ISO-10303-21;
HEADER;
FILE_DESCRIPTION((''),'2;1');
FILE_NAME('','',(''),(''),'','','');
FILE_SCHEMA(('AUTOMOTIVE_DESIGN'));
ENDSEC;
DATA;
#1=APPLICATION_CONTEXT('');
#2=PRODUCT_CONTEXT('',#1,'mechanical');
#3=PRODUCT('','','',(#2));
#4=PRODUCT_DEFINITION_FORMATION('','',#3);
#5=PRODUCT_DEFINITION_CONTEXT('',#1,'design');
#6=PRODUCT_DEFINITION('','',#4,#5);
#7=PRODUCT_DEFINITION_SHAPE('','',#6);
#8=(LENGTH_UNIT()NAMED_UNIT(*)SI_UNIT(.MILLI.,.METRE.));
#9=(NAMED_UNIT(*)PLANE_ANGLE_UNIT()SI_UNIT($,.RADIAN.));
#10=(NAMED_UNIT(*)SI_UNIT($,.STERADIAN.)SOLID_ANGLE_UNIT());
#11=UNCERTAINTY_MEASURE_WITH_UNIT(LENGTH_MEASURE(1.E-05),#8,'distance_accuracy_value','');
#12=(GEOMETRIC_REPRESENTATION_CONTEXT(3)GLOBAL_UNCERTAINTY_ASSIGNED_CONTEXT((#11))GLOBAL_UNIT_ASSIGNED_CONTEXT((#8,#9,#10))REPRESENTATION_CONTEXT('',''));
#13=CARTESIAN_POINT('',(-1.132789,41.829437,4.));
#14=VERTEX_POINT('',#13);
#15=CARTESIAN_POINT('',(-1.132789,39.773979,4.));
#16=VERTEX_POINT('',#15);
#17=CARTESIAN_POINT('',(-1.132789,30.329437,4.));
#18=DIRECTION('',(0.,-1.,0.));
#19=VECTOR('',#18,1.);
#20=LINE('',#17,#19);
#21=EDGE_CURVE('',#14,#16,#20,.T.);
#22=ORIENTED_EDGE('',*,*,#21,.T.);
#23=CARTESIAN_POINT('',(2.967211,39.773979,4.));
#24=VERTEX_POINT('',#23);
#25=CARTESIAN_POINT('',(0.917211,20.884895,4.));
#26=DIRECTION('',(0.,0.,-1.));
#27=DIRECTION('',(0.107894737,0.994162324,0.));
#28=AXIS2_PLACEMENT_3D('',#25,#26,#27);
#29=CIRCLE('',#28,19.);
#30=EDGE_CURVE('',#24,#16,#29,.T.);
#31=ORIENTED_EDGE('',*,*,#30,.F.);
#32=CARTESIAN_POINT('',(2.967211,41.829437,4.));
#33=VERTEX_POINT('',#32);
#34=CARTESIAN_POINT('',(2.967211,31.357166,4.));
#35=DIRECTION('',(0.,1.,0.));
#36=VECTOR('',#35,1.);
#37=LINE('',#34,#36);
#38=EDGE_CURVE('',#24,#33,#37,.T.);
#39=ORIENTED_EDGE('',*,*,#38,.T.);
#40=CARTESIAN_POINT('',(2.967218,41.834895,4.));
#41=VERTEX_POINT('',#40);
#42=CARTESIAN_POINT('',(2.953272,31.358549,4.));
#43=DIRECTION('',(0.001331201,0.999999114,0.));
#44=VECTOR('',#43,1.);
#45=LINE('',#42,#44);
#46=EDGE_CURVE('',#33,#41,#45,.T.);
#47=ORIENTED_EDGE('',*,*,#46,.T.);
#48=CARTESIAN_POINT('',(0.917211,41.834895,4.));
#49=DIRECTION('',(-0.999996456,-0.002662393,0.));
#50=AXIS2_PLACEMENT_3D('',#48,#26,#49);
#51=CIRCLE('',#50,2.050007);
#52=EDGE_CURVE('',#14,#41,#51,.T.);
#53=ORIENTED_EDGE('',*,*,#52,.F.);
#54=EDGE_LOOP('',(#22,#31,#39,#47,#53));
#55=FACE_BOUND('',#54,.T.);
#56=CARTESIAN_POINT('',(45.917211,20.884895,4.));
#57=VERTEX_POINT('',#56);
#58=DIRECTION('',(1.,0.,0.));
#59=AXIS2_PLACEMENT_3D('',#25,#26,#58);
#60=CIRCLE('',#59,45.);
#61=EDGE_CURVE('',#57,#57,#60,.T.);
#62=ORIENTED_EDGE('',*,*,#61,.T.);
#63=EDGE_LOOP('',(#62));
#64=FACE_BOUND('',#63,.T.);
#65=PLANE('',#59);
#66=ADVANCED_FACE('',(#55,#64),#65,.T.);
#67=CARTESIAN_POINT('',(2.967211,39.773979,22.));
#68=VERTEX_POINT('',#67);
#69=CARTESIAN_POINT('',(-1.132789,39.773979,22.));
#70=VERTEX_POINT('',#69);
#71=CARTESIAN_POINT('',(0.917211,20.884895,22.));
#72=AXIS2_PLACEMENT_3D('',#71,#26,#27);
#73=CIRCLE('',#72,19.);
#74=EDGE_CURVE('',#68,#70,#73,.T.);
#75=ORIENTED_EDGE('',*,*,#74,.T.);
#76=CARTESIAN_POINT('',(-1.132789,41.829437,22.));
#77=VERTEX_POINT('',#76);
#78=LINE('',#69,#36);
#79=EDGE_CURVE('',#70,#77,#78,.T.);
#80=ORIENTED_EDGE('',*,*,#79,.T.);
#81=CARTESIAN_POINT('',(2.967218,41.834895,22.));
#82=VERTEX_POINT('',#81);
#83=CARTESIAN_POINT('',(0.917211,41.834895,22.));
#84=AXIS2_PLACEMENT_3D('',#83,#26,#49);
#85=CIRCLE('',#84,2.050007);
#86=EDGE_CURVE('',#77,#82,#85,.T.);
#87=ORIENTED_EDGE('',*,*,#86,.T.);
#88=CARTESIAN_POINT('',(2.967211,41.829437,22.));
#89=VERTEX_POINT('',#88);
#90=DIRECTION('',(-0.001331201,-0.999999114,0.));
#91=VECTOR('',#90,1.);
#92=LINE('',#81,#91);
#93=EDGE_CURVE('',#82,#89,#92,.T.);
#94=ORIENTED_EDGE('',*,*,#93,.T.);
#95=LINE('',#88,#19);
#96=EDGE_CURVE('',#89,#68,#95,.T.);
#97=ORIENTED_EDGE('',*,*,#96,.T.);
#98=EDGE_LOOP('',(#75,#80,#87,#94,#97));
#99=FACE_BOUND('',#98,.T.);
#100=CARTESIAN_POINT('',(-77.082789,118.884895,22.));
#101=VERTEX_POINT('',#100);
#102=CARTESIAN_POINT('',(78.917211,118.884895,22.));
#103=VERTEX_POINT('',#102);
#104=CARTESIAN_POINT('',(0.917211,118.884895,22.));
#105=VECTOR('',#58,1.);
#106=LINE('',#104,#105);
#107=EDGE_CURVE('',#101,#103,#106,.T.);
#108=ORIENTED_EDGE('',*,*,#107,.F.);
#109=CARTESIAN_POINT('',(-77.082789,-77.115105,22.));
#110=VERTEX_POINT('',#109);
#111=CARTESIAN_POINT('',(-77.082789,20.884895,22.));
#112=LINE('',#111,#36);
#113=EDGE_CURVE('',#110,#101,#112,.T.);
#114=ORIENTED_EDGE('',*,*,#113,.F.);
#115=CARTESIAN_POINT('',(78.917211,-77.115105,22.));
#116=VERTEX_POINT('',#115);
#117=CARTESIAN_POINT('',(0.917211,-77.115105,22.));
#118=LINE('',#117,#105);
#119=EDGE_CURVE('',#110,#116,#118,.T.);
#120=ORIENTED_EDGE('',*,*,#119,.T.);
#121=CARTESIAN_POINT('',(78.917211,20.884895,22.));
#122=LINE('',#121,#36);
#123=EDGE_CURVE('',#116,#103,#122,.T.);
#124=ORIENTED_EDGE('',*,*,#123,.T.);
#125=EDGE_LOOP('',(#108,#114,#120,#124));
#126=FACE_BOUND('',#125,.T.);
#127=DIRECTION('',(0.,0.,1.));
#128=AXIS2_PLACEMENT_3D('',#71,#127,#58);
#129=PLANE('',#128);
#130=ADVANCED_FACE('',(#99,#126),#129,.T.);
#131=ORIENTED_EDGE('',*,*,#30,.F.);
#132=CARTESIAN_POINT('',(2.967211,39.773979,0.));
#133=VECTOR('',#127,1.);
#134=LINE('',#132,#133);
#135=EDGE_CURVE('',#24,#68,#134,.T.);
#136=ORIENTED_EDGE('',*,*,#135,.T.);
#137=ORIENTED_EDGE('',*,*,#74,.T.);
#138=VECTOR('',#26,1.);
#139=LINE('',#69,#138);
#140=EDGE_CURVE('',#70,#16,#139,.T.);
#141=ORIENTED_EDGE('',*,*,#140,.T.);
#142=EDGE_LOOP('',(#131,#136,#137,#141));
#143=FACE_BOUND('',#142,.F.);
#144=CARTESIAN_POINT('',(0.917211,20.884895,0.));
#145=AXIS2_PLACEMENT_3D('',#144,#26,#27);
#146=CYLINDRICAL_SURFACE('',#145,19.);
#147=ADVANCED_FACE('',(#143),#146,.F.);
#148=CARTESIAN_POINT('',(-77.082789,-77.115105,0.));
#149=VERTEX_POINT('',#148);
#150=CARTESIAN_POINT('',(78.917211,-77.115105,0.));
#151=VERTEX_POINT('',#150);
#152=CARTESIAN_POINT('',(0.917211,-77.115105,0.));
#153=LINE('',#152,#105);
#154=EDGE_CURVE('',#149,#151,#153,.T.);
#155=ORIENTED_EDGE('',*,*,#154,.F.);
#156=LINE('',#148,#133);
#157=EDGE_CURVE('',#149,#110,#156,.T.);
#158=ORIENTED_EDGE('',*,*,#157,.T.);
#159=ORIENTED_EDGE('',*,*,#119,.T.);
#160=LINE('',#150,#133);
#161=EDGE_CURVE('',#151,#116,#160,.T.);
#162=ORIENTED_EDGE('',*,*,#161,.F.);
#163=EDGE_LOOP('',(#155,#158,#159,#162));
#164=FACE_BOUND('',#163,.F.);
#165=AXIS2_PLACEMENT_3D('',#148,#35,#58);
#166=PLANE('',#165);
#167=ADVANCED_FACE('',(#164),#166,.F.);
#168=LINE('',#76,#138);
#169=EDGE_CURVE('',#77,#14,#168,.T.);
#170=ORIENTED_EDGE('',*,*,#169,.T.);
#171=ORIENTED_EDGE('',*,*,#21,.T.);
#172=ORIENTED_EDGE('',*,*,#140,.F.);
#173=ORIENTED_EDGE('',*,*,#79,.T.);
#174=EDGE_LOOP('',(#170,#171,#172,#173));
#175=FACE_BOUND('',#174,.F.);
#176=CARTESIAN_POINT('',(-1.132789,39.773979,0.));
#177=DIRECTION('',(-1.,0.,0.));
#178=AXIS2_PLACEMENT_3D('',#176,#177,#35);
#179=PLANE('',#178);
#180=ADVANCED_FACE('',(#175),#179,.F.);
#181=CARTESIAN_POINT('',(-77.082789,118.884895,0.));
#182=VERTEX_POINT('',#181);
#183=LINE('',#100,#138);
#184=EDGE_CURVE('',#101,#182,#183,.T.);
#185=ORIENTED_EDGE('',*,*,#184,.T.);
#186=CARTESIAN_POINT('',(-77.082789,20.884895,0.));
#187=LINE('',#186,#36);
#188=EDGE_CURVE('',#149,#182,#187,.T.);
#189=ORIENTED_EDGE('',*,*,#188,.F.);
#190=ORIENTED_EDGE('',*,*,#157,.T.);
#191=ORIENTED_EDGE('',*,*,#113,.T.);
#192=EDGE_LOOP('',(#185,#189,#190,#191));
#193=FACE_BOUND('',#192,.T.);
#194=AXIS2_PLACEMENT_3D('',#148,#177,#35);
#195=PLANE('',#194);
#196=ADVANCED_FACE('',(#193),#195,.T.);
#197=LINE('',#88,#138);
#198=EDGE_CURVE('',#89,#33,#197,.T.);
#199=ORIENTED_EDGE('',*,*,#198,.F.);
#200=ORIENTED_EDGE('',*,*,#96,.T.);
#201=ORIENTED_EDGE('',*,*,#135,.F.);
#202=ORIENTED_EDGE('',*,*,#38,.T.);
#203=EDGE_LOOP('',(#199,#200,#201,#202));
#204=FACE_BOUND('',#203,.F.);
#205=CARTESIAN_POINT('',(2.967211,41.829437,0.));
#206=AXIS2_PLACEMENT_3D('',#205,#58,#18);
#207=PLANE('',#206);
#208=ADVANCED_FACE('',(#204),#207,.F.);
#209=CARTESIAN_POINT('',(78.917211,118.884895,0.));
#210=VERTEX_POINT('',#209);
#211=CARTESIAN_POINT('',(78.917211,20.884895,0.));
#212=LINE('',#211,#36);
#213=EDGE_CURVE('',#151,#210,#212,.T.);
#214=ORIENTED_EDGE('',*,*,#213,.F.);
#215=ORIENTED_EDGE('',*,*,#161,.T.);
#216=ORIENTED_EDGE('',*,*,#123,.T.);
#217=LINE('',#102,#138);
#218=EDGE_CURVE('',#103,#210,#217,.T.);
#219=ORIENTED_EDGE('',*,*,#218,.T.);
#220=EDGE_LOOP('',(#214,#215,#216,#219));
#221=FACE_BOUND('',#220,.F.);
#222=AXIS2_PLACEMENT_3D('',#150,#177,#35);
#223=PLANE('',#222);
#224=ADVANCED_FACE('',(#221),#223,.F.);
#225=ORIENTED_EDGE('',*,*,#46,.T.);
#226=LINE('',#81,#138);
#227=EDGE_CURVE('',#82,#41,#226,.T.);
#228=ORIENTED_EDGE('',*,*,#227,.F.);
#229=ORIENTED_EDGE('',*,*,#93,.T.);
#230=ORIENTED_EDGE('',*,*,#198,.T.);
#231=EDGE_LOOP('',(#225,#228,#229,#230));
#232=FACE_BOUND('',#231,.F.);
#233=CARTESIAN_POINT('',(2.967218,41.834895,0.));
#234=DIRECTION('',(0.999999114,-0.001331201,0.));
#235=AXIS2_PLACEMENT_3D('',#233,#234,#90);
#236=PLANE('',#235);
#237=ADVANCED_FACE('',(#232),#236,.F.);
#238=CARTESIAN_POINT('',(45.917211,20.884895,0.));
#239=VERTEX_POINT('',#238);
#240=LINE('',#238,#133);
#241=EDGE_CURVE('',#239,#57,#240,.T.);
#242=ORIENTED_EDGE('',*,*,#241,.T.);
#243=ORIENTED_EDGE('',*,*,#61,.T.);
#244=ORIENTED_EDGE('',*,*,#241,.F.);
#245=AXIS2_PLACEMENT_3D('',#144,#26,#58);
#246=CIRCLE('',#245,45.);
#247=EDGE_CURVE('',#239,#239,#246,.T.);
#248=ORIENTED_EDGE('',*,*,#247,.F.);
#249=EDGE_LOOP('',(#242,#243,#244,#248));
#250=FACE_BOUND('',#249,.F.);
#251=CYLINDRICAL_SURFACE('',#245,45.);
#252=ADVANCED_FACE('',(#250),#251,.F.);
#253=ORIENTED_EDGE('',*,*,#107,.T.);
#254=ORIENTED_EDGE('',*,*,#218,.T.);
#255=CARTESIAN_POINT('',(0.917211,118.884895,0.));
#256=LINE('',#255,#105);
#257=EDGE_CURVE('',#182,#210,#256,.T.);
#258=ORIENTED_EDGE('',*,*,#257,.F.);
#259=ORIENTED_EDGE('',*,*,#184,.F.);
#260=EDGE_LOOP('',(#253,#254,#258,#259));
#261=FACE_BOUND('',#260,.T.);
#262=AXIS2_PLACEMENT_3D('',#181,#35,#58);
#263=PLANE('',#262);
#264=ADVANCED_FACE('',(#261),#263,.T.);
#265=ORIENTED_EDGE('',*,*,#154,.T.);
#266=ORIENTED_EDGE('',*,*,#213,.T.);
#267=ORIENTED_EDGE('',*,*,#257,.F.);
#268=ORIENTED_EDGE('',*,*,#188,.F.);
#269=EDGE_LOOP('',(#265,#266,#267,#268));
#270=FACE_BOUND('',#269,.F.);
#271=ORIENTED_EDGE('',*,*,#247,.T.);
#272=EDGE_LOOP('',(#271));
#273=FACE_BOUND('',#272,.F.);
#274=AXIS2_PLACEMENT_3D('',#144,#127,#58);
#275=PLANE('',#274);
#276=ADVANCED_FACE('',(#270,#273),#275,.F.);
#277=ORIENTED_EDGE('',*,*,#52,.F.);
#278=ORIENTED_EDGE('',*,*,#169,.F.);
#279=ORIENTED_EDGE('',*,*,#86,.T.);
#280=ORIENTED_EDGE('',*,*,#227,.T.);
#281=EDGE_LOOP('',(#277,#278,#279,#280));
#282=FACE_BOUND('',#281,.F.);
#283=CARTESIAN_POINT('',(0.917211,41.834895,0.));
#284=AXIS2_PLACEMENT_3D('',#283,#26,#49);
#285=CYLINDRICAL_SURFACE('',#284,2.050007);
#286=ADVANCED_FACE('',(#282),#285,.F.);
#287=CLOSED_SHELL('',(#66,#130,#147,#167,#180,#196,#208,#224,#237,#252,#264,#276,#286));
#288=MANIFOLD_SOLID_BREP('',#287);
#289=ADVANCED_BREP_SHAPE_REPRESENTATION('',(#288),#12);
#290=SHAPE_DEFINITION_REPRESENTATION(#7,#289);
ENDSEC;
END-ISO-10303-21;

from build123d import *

# Parameters (mm, degrees)
F0_W     = 156
F0_H     = 196
F1_DEPTH = 22
F2_DEPTH = 4
F3_R     = 45
F4_DEPTH = 4


# Not quite as in the source:
# - ends of sketch curves that miss each other by under 0.0002 mm in the source are joined


with BuildPart() as f1:
    # F0 (on Top) → F1 (new body)
    with BuildSketch(Plane.XY):
        with Locations((0.9172109421, 20.8848945383)):
            Rectangle(F0_W, F0_H)
        with BuildLine():
            ThreePointArc((2.9672109421, 39.7739786876), (0.9172109421, 1.8848945383), (-1.1327890579, 39.7739786876))
            Line((-1.1327890579, 39.7739786876), (-1.1327890579, 41.8294366129))
            ThreePointArc((-1.1327890579, 41.8294366129), (0.914481977, 43.8848999875), (2.9672182077, 41.8348945383))
            Line((2.9672182077, 41.8348945383), (2.9672109421, 41.8294366129))
            Line((2.9672109421, 41.8294366129), (2.9672109421, 39.7739786876))
        make_face(mode=Mode.SUBTRACT)
    extrude(amount=F1_DEPTH)

    # F0 (on Top) → F2 (join)
    with BuildSketch(Plane.XY):
        with Locations((0.9172109421, 20.8848945383)):
            Rectangle(F0_W, F0_H)
        with BuildLine():
            ThreePointArc((2.9672109421, 39.7739786876), (0.9172109421, 1.8848945383), (-1.1327890579, 39.7739786876))
            Line((-1.1327890579, 39.7739786876), (-1.1327890579, 41.8294366129))
            ThreePointArc((-1.1327890579, 41.8294366129), (0.914481977, 43.8848999875), (2.9672182077, 41.8348945383))
            Line((2.9672182077, 41.8348945383), (2.9672109421, 41.8294366129))
            Line((2.9672109421, 41.8294366129), (2.9672109421, 39.7739786876))
        make_face(mode=Mode.SUBTRACT)
    extrude(amount=F2_DEPTH)

    # F3 (on face) → F4 (cut)
    with BuildSketch(Plane(origin=(0, 0, 0), x_dir=(1, 0, 0), z_dir=(0, 0, -1))):
        with Locations((0.9172109421, -20.8848945383)):
            Circle(F3_R)
    extrude(amount=-F4_DEPTH, mode=Mode.SUBTRACT)


solid = f1.part
